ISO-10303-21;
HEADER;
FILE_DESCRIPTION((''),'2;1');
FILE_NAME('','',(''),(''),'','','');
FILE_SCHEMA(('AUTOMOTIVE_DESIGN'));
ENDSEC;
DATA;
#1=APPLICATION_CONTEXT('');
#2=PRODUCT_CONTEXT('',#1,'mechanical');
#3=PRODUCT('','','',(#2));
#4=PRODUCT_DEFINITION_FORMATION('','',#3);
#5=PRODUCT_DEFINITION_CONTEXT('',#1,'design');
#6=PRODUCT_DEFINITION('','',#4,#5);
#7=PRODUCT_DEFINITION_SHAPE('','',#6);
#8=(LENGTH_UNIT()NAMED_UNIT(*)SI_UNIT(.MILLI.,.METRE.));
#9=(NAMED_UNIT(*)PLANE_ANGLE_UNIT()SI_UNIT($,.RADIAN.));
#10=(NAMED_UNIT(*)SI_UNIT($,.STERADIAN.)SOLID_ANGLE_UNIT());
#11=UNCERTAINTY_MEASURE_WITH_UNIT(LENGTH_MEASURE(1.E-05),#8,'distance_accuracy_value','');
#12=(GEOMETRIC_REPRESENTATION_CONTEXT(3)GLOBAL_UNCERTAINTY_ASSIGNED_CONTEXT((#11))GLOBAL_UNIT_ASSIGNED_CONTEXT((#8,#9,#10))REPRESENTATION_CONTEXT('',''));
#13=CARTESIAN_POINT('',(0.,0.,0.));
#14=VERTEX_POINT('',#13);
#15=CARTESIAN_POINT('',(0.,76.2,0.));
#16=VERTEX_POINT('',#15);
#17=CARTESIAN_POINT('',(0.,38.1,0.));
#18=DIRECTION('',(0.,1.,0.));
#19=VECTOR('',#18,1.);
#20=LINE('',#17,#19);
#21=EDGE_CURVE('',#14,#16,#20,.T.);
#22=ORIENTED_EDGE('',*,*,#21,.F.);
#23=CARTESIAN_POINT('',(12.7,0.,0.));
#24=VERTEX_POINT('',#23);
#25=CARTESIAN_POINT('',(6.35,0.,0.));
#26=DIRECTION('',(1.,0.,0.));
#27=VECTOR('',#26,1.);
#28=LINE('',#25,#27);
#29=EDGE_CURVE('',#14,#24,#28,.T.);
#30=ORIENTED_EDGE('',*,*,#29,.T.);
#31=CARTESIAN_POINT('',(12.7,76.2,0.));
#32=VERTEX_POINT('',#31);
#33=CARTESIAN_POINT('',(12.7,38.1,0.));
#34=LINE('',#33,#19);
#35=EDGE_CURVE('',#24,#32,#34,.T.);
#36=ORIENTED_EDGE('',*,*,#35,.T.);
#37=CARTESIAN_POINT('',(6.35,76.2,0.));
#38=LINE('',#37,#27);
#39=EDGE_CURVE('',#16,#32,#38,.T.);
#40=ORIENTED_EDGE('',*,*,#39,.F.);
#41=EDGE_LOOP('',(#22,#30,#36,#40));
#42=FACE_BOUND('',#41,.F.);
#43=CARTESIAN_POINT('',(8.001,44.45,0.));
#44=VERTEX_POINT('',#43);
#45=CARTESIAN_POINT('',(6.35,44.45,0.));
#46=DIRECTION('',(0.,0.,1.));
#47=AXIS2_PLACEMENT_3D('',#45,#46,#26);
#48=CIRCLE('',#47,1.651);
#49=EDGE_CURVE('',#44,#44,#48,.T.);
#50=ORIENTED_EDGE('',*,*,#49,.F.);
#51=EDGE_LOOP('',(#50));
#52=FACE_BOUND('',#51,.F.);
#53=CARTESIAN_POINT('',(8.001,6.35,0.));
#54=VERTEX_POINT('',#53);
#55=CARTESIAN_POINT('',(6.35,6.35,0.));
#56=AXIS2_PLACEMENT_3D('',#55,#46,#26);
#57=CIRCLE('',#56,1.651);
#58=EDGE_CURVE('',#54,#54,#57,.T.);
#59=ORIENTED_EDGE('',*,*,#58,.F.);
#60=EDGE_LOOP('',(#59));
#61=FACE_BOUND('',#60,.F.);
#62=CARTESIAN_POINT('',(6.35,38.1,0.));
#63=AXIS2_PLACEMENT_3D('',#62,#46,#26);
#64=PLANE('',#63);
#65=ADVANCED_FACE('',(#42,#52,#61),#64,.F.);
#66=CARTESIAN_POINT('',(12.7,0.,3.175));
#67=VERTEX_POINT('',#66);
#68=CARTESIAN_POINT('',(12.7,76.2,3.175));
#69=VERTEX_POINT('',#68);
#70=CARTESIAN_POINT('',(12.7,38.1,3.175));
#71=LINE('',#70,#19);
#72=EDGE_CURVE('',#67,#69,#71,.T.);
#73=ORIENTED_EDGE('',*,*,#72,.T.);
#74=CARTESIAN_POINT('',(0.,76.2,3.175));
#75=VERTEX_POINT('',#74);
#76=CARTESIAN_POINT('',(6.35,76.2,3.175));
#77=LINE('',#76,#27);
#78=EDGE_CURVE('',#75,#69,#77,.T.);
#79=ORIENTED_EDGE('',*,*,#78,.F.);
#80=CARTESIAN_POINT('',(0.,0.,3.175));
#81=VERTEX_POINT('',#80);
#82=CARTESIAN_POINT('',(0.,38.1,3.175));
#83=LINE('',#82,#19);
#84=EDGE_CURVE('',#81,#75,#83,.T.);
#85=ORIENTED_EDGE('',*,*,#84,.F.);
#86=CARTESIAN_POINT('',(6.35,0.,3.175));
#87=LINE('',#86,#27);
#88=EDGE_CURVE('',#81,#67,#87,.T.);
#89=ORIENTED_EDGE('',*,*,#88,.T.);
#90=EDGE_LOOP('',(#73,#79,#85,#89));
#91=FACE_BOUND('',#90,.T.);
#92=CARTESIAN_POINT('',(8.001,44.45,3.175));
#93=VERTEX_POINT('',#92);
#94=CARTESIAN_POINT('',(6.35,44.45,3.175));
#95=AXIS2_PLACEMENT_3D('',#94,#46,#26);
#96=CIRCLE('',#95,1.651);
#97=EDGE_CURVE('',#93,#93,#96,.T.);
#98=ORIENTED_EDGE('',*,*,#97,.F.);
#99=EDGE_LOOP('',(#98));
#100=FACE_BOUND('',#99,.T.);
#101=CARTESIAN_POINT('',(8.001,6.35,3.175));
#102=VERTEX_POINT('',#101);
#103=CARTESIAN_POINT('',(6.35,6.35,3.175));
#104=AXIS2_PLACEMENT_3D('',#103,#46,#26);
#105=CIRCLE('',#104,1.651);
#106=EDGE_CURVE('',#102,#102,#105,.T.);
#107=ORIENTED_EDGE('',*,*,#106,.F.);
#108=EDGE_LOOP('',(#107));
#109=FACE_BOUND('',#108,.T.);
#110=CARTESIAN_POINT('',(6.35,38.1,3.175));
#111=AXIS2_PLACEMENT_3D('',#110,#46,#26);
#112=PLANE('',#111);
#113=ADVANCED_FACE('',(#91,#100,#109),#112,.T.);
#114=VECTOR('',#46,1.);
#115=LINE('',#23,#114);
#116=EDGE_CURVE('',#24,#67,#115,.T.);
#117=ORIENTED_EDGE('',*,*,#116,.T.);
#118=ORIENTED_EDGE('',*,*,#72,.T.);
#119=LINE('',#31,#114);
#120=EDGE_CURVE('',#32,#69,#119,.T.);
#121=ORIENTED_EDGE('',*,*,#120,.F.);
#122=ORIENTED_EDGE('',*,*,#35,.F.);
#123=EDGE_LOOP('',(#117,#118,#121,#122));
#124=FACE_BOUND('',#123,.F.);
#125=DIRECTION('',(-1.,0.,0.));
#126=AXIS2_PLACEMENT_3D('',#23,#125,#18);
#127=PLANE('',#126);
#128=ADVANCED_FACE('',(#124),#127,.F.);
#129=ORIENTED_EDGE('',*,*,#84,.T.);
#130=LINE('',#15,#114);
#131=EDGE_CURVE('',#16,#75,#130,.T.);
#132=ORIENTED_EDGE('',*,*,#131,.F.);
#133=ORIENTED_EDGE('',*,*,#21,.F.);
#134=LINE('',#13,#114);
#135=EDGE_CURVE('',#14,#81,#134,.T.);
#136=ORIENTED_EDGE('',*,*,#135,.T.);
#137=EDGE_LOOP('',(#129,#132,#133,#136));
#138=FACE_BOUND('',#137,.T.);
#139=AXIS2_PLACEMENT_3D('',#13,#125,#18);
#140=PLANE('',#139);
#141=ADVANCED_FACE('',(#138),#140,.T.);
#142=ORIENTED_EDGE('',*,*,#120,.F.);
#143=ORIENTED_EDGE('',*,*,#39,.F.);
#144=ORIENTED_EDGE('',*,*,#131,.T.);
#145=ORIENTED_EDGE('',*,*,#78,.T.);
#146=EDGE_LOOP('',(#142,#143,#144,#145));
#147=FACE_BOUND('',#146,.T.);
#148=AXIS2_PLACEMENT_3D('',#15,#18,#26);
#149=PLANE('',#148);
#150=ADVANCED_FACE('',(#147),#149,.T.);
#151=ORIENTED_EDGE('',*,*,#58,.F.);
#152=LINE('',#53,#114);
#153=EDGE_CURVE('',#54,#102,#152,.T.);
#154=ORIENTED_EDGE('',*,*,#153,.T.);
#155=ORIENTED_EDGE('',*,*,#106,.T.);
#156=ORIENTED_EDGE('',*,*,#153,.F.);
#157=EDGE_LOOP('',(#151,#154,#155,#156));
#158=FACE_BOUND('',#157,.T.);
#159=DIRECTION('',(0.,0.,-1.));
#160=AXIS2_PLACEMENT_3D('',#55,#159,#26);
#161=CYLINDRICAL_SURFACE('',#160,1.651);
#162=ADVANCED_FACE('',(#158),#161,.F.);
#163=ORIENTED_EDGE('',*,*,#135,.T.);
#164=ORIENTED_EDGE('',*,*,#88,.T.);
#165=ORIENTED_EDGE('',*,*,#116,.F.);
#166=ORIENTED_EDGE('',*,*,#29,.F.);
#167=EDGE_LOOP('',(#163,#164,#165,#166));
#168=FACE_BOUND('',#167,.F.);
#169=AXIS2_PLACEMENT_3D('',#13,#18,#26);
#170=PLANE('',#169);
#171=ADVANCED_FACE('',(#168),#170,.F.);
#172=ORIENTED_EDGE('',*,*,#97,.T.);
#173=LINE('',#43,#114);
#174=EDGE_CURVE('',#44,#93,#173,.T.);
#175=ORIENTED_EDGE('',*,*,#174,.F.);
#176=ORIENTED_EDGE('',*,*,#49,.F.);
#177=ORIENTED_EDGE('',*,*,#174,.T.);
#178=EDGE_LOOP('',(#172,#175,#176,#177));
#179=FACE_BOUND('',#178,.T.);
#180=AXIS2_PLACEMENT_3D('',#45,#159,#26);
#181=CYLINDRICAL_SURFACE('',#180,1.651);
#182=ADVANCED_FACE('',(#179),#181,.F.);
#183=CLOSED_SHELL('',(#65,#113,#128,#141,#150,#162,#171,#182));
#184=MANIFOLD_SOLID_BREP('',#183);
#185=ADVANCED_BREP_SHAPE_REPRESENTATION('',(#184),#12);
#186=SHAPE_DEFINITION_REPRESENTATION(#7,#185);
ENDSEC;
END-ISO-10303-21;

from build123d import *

# Parameters (mm, degrees)
F0_W     = 12.7
F0_H     = 76.2
F0_R     = 1.651
F1_DEPTH = 3.175


# Not quite as in the source:
# - a length typed as a fraction of an inch, garbled in the dataset ("3 / 203.2 mm" for 3/8 in), is restored


with BuildPart() as f1:
    # F0 (on Top) → F1 (new body)
    with BuildSketch(Plane.XY):
        with Locations((6.35, 38.1)):
            Rectangle(F0_W, F0_H)
        with Locations((6.35, 6.35)):
            Circle(F0_R, mode=Mode.SUBTRACT)
        with Locations((6.35, 44.45)):
            Circle(F0_R, mode=Mode.SUBTRACT)
    extrude(amount=F1_DEPTH)


solid = f1.part
